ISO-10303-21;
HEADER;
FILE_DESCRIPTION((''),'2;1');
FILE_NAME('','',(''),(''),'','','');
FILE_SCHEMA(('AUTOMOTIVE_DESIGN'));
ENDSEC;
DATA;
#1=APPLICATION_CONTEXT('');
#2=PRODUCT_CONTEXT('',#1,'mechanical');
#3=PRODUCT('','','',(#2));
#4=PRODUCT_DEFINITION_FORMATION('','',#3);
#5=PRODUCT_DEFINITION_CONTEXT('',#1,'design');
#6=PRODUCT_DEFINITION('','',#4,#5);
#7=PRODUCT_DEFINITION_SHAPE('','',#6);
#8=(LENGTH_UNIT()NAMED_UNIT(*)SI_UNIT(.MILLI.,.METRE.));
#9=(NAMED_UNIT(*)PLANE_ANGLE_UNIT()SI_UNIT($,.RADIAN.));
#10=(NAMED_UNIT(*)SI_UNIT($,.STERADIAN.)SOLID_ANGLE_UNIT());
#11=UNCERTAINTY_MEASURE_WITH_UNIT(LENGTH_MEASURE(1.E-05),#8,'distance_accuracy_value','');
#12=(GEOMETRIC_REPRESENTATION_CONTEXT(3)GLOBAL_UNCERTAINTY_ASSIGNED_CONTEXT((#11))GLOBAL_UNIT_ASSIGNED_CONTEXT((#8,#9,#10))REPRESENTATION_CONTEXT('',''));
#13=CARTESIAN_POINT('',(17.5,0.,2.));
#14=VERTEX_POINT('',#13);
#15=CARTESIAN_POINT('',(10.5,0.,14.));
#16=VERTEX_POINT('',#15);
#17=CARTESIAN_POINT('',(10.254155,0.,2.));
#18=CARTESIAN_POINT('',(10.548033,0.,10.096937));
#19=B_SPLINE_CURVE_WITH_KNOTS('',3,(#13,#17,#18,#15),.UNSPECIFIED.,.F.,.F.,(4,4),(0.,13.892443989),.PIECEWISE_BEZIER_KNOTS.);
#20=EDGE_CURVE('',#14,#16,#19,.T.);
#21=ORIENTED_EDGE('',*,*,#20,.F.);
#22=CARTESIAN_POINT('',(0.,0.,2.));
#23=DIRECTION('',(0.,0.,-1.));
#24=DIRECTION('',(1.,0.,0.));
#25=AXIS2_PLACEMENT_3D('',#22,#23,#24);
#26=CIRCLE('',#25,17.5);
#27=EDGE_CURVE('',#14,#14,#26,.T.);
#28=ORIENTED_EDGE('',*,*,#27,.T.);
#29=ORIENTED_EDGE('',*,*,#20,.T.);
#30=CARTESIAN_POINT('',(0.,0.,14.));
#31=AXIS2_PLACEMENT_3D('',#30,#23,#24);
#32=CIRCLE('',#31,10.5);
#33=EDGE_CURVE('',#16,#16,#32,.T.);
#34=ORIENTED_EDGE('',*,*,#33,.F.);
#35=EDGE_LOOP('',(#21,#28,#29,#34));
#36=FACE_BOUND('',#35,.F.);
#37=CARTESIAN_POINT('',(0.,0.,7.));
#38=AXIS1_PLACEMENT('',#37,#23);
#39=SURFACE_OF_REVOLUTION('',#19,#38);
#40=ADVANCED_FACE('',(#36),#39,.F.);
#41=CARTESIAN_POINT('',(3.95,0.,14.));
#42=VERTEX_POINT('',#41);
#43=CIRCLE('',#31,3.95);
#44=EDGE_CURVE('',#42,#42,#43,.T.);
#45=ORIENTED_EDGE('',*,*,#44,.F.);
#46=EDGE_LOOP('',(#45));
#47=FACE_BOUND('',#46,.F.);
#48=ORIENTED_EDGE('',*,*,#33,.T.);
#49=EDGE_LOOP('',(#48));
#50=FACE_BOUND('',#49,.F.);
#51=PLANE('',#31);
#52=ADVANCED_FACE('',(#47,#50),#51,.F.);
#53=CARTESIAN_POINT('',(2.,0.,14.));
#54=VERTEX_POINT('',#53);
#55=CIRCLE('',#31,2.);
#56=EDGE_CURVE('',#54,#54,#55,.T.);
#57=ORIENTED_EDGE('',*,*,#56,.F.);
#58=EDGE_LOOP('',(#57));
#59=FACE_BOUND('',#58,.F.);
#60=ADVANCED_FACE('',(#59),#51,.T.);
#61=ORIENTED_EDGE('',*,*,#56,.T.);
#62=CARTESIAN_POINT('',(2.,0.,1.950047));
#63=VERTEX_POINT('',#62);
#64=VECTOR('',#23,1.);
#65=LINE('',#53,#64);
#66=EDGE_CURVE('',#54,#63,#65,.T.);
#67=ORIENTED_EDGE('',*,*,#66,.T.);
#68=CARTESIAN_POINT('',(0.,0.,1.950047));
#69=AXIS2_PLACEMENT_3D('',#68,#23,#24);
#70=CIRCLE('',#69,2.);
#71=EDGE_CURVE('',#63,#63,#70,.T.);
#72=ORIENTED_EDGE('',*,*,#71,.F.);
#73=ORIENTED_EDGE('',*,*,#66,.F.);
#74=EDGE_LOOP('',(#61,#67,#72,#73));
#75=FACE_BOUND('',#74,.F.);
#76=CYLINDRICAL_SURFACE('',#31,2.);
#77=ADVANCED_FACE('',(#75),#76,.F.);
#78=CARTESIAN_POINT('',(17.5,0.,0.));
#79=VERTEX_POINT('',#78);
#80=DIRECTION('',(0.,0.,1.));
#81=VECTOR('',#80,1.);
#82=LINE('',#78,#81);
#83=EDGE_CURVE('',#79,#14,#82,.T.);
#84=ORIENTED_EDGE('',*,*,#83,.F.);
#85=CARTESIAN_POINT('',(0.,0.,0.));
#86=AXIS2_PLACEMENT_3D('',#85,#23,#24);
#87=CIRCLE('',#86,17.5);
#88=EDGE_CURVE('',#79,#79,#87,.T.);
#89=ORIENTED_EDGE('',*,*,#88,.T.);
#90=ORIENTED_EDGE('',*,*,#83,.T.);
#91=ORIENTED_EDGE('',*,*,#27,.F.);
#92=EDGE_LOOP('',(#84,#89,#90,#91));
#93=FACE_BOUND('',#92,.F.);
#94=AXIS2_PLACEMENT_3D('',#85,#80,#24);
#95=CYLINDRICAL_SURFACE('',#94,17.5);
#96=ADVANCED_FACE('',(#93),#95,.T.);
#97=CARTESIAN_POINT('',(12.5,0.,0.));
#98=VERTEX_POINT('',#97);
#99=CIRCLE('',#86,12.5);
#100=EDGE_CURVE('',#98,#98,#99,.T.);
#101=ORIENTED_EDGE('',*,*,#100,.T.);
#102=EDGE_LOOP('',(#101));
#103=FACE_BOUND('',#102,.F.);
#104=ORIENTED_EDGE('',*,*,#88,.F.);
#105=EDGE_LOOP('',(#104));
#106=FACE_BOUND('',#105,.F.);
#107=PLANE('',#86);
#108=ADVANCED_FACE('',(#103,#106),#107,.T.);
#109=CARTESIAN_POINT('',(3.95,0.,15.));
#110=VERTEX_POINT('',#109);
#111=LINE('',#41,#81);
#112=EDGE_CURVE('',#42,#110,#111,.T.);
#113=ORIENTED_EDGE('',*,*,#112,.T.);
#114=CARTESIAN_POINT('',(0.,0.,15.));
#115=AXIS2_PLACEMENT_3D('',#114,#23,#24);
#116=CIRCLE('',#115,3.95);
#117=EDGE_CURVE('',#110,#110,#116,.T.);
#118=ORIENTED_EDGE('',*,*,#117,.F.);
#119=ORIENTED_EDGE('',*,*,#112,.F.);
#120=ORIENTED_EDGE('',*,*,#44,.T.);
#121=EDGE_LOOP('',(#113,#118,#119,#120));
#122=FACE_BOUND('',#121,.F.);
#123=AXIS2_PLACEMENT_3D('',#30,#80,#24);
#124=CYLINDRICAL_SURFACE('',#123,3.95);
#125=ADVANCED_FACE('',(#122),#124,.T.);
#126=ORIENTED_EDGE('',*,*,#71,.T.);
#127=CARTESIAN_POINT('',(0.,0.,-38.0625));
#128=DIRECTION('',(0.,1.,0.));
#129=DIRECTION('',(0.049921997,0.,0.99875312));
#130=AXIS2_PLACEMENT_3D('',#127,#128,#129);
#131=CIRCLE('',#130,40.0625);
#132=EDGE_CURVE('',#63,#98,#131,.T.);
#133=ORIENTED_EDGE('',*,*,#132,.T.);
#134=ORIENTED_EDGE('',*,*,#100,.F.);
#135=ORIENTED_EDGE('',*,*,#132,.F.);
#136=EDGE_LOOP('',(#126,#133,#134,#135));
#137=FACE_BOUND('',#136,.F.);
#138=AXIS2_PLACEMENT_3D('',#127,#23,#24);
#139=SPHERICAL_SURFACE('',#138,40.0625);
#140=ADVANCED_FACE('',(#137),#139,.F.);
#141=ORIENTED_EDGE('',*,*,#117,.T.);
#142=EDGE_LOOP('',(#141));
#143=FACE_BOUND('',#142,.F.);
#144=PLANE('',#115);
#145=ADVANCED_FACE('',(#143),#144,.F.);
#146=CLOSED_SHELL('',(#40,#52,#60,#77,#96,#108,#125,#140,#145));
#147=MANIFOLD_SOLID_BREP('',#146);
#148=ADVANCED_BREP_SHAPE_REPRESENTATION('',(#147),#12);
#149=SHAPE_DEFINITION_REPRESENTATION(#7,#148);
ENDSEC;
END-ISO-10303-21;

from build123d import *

# Parameters (mm, degrees)
F0_W = 2
F0_H = 1


# Not quite as in the source:
# - a feature names something its author has since deleted; it is built from what else it names


with BuildPart() as f1:
    # F0 (on Front) → F1 (revolve)
    with BuildSketch(Plane.XZ):
        with BuildLine():
            Line((10.5, 14), (3.95, 14))
            Line((3.95, 14), (2, 14))
            Line((2, 14), (2, 2))
            Line((2, 2), (17.5, 2))
            add(Edge.make_bspline(
                [(17.5, 2), (10.2541549131, 2), (10.5480328202, 10.096937418), (10.5, 14)],
                knots=[0, 0, 0, 0, 13.8924439894, 13.8924439894, 13.8924439894, 13.8924439894], degree=3))
        make_face()
        with BuildLine():
            Line((17.5, 0), (17.5, 2))
            Line((17.5, 2), (2, 2))
            Line((2, 2), (2, 1.9500468603))
            ThreePointArc((2, 1.9500468603), (7.3152696935, 1.3264671807), (12.5, 0))
            Line((12.5, 0), (17.5, 0))
        make_face()
        with Locations((1, 14.5)):
            Rectangle(F0_W, F0_H)
        Polygon((2, 14), (3.95, 14), (3.95, 15), (2.3, 15), (2, 15), align=None)
    revolve(axis=Axis((0, 0, 7), (0, 0, -1)))


solid = f1.part
